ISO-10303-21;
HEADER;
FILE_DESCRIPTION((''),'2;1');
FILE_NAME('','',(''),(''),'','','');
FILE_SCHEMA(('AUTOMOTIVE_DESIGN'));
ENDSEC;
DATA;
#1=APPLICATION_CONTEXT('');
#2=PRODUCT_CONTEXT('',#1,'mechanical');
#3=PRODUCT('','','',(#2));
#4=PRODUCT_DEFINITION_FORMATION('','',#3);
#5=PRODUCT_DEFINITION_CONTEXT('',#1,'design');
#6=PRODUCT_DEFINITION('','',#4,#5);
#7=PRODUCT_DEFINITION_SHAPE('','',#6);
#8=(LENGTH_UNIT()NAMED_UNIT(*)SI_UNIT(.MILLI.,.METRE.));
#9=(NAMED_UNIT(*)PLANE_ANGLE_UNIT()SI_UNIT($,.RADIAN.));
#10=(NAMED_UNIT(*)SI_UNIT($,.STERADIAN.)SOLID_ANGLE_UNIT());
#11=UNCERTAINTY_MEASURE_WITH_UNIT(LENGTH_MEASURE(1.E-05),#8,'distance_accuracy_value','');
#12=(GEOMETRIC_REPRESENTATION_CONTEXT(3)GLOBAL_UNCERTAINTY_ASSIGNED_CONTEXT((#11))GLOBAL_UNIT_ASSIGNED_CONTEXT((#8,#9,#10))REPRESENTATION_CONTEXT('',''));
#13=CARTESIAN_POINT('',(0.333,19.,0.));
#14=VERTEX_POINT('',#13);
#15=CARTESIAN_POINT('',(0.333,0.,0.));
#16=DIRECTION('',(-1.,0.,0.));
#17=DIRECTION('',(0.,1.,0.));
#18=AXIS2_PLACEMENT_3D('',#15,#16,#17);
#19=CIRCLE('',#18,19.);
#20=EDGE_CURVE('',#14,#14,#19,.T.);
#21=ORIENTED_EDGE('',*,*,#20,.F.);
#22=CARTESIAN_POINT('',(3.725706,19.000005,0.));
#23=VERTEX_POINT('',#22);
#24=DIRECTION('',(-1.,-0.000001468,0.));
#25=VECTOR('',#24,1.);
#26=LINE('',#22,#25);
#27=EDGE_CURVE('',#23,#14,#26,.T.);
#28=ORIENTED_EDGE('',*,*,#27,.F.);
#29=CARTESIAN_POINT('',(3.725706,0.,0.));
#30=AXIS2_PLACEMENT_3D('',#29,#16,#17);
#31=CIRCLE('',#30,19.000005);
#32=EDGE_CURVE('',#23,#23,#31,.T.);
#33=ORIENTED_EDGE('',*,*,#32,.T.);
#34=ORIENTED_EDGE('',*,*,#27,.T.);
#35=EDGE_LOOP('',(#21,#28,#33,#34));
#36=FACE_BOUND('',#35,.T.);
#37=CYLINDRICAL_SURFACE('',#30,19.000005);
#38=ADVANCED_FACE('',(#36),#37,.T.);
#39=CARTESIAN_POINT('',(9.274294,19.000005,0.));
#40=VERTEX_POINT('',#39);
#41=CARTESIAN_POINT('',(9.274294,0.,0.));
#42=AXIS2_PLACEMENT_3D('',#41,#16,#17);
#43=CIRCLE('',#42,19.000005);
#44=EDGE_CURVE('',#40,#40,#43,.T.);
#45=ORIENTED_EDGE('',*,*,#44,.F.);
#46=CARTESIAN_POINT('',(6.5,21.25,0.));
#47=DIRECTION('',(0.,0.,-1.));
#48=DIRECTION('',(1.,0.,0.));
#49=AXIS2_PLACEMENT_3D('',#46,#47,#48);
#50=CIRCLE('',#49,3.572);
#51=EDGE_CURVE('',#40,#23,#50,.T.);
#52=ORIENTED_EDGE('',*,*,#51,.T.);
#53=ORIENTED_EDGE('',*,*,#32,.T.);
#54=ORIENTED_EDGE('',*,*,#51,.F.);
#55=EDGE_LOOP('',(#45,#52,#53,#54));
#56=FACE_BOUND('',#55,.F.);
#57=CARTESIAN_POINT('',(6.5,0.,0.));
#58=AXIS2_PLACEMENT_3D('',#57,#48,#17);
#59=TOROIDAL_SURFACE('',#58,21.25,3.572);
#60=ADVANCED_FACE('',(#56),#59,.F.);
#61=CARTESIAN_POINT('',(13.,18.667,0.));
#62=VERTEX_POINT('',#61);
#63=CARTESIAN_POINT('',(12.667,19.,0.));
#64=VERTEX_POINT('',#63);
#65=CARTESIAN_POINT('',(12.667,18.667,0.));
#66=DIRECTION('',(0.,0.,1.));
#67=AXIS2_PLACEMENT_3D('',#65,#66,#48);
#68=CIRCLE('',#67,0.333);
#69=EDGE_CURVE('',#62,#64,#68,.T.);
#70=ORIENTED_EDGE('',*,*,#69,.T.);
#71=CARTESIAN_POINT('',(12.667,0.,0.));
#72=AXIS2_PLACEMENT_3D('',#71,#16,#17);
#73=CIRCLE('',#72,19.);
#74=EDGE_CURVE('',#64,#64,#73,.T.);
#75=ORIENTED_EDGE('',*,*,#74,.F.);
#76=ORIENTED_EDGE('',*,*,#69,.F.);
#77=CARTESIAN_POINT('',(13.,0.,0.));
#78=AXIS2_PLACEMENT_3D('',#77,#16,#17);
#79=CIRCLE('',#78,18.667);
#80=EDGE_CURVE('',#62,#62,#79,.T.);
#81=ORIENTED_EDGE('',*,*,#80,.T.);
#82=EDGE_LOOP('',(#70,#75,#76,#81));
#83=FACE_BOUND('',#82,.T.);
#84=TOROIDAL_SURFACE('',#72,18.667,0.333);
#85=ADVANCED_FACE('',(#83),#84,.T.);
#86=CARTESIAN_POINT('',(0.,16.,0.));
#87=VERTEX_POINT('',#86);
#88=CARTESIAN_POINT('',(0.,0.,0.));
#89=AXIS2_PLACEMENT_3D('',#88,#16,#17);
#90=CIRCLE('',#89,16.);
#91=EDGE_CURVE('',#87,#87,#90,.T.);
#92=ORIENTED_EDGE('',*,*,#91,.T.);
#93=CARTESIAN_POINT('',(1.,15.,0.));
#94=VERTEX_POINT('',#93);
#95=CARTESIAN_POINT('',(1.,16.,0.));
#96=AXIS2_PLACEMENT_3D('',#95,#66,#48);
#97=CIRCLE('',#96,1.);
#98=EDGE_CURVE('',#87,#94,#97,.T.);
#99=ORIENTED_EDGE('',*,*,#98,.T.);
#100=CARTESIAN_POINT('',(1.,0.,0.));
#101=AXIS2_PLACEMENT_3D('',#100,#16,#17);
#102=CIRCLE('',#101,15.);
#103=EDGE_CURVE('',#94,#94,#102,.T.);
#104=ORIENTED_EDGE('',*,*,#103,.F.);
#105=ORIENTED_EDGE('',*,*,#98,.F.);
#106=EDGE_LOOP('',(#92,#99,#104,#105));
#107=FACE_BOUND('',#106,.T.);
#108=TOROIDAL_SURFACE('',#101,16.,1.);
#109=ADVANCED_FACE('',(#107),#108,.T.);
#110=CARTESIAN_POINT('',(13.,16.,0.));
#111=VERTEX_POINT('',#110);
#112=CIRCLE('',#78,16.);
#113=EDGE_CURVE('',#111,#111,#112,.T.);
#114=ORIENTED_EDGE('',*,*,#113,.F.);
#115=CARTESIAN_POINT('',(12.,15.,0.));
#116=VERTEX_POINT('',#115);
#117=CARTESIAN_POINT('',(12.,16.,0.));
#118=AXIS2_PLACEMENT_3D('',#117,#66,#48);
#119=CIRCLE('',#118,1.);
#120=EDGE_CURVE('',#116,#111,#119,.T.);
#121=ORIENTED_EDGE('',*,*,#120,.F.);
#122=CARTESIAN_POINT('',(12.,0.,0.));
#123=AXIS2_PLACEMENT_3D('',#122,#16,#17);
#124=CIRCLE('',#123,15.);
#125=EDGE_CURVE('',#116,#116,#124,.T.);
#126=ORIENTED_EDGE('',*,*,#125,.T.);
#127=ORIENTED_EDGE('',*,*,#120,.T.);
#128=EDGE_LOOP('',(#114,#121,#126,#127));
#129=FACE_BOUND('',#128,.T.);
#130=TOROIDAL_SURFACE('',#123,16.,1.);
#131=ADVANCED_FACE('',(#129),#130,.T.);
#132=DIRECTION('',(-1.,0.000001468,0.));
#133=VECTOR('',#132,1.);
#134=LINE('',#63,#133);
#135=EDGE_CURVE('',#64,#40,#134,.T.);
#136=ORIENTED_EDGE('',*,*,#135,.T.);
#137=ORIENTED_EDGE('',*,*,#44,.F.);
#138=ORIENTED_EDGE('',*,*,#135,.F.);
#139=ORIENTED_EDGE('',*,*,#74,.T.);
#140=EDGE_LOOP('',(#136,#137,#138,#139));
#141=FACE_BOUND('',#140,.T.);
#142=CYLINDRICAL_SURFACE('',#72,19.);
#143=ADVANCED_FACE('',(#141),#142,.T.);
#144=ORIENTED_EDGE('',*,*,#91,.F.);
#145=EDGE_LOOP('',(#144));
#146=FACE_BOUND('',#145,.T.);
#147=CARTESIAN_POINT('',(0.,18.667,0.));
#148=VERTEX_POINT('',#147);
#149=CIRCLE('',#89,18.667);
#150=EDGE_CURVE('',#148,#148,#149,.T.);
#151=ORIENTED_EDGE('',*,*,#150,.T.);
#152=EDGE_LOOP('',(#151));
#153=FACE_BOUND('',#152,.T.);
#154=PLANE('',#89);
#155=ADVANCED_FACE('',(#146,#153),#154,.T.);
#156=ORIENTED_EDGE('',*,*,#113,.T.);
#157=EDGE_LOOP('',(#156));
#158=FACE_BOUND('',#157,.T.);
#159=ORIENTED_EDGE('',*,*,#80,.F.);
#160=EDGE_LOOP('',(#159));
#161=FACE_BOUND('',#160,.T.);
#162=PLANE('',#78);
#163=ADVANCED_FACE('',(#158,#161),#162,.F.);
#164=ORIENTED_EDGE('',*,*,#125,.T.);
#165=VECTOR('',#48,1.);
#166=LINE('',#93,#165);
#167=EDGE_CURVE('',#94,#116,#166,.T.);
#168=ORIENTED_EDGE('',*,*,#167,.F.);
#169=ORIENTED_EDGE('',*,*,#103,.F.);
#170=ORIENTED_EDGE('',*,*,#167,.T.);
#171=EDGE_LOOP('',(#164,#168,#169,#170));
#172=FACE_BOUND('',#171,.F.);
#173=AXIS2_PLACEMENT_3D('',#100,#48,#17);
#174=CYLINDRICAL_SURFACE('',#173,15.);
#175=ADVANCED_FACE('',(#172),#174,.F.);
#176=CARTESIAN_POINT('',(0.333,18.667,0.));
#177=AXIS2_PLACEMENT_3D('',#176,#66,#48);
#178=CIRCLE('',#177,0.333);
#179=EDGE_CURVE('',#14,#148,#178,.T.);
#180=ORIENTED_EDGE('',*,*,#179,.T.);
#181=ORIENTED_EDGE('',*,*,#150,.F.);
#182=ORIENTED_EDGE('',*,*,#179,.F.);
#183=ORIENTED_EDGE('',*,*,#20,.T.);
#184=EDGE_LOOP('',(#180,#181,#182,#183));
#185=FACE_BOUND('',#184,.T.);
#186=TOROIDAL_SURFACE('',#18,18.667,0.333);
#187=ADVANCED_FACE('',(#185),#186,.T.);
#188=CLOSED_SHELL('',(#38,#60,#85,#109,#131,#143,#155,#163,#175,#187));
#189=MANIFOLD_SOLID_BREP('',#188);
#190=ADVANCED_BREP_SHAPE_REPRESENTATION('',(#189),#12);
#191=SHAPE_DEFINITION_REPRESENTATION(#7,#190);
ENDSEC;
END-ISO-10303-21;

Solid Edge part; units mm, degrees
sketch "Sketch1" plane through (0, 0, 0) normal (0, 0, 1) x (1, 0, 0)
  arc A0 (0, 16) -> (1, 15) centre (1, 16) ccw
  line L0 (1, 15) -> (12, 15)
  arc A1 (12, 15) -> (13, 16) centre (12, 16) ccw
  line L1 (13, 16) -> (13, 18.667)
  arc A2 (13, 18.667) -> (12.667, 19) centre (12.667, 18.667) ccw
  line L2 (12.667, 19) -> (9.2743, 19)
  arc A3 (9.2743, 19) -> (3.7257, 19) centre (6.5, 21.25) cw
  line L3 (3.7257, 19) -> (0.333, 19)
  arc A4 (0.333, 19) -> (0, 18.667) centre (0.333, 18.667) ccw
  line L4 (0, 18.667) -> (0, 16)
revolve "RevolvedProtrusion1" add sketch "Sketch1" angle 360 about axis through (12, 0, 0) along (-1, 0, 0)
properties material "Steel"
